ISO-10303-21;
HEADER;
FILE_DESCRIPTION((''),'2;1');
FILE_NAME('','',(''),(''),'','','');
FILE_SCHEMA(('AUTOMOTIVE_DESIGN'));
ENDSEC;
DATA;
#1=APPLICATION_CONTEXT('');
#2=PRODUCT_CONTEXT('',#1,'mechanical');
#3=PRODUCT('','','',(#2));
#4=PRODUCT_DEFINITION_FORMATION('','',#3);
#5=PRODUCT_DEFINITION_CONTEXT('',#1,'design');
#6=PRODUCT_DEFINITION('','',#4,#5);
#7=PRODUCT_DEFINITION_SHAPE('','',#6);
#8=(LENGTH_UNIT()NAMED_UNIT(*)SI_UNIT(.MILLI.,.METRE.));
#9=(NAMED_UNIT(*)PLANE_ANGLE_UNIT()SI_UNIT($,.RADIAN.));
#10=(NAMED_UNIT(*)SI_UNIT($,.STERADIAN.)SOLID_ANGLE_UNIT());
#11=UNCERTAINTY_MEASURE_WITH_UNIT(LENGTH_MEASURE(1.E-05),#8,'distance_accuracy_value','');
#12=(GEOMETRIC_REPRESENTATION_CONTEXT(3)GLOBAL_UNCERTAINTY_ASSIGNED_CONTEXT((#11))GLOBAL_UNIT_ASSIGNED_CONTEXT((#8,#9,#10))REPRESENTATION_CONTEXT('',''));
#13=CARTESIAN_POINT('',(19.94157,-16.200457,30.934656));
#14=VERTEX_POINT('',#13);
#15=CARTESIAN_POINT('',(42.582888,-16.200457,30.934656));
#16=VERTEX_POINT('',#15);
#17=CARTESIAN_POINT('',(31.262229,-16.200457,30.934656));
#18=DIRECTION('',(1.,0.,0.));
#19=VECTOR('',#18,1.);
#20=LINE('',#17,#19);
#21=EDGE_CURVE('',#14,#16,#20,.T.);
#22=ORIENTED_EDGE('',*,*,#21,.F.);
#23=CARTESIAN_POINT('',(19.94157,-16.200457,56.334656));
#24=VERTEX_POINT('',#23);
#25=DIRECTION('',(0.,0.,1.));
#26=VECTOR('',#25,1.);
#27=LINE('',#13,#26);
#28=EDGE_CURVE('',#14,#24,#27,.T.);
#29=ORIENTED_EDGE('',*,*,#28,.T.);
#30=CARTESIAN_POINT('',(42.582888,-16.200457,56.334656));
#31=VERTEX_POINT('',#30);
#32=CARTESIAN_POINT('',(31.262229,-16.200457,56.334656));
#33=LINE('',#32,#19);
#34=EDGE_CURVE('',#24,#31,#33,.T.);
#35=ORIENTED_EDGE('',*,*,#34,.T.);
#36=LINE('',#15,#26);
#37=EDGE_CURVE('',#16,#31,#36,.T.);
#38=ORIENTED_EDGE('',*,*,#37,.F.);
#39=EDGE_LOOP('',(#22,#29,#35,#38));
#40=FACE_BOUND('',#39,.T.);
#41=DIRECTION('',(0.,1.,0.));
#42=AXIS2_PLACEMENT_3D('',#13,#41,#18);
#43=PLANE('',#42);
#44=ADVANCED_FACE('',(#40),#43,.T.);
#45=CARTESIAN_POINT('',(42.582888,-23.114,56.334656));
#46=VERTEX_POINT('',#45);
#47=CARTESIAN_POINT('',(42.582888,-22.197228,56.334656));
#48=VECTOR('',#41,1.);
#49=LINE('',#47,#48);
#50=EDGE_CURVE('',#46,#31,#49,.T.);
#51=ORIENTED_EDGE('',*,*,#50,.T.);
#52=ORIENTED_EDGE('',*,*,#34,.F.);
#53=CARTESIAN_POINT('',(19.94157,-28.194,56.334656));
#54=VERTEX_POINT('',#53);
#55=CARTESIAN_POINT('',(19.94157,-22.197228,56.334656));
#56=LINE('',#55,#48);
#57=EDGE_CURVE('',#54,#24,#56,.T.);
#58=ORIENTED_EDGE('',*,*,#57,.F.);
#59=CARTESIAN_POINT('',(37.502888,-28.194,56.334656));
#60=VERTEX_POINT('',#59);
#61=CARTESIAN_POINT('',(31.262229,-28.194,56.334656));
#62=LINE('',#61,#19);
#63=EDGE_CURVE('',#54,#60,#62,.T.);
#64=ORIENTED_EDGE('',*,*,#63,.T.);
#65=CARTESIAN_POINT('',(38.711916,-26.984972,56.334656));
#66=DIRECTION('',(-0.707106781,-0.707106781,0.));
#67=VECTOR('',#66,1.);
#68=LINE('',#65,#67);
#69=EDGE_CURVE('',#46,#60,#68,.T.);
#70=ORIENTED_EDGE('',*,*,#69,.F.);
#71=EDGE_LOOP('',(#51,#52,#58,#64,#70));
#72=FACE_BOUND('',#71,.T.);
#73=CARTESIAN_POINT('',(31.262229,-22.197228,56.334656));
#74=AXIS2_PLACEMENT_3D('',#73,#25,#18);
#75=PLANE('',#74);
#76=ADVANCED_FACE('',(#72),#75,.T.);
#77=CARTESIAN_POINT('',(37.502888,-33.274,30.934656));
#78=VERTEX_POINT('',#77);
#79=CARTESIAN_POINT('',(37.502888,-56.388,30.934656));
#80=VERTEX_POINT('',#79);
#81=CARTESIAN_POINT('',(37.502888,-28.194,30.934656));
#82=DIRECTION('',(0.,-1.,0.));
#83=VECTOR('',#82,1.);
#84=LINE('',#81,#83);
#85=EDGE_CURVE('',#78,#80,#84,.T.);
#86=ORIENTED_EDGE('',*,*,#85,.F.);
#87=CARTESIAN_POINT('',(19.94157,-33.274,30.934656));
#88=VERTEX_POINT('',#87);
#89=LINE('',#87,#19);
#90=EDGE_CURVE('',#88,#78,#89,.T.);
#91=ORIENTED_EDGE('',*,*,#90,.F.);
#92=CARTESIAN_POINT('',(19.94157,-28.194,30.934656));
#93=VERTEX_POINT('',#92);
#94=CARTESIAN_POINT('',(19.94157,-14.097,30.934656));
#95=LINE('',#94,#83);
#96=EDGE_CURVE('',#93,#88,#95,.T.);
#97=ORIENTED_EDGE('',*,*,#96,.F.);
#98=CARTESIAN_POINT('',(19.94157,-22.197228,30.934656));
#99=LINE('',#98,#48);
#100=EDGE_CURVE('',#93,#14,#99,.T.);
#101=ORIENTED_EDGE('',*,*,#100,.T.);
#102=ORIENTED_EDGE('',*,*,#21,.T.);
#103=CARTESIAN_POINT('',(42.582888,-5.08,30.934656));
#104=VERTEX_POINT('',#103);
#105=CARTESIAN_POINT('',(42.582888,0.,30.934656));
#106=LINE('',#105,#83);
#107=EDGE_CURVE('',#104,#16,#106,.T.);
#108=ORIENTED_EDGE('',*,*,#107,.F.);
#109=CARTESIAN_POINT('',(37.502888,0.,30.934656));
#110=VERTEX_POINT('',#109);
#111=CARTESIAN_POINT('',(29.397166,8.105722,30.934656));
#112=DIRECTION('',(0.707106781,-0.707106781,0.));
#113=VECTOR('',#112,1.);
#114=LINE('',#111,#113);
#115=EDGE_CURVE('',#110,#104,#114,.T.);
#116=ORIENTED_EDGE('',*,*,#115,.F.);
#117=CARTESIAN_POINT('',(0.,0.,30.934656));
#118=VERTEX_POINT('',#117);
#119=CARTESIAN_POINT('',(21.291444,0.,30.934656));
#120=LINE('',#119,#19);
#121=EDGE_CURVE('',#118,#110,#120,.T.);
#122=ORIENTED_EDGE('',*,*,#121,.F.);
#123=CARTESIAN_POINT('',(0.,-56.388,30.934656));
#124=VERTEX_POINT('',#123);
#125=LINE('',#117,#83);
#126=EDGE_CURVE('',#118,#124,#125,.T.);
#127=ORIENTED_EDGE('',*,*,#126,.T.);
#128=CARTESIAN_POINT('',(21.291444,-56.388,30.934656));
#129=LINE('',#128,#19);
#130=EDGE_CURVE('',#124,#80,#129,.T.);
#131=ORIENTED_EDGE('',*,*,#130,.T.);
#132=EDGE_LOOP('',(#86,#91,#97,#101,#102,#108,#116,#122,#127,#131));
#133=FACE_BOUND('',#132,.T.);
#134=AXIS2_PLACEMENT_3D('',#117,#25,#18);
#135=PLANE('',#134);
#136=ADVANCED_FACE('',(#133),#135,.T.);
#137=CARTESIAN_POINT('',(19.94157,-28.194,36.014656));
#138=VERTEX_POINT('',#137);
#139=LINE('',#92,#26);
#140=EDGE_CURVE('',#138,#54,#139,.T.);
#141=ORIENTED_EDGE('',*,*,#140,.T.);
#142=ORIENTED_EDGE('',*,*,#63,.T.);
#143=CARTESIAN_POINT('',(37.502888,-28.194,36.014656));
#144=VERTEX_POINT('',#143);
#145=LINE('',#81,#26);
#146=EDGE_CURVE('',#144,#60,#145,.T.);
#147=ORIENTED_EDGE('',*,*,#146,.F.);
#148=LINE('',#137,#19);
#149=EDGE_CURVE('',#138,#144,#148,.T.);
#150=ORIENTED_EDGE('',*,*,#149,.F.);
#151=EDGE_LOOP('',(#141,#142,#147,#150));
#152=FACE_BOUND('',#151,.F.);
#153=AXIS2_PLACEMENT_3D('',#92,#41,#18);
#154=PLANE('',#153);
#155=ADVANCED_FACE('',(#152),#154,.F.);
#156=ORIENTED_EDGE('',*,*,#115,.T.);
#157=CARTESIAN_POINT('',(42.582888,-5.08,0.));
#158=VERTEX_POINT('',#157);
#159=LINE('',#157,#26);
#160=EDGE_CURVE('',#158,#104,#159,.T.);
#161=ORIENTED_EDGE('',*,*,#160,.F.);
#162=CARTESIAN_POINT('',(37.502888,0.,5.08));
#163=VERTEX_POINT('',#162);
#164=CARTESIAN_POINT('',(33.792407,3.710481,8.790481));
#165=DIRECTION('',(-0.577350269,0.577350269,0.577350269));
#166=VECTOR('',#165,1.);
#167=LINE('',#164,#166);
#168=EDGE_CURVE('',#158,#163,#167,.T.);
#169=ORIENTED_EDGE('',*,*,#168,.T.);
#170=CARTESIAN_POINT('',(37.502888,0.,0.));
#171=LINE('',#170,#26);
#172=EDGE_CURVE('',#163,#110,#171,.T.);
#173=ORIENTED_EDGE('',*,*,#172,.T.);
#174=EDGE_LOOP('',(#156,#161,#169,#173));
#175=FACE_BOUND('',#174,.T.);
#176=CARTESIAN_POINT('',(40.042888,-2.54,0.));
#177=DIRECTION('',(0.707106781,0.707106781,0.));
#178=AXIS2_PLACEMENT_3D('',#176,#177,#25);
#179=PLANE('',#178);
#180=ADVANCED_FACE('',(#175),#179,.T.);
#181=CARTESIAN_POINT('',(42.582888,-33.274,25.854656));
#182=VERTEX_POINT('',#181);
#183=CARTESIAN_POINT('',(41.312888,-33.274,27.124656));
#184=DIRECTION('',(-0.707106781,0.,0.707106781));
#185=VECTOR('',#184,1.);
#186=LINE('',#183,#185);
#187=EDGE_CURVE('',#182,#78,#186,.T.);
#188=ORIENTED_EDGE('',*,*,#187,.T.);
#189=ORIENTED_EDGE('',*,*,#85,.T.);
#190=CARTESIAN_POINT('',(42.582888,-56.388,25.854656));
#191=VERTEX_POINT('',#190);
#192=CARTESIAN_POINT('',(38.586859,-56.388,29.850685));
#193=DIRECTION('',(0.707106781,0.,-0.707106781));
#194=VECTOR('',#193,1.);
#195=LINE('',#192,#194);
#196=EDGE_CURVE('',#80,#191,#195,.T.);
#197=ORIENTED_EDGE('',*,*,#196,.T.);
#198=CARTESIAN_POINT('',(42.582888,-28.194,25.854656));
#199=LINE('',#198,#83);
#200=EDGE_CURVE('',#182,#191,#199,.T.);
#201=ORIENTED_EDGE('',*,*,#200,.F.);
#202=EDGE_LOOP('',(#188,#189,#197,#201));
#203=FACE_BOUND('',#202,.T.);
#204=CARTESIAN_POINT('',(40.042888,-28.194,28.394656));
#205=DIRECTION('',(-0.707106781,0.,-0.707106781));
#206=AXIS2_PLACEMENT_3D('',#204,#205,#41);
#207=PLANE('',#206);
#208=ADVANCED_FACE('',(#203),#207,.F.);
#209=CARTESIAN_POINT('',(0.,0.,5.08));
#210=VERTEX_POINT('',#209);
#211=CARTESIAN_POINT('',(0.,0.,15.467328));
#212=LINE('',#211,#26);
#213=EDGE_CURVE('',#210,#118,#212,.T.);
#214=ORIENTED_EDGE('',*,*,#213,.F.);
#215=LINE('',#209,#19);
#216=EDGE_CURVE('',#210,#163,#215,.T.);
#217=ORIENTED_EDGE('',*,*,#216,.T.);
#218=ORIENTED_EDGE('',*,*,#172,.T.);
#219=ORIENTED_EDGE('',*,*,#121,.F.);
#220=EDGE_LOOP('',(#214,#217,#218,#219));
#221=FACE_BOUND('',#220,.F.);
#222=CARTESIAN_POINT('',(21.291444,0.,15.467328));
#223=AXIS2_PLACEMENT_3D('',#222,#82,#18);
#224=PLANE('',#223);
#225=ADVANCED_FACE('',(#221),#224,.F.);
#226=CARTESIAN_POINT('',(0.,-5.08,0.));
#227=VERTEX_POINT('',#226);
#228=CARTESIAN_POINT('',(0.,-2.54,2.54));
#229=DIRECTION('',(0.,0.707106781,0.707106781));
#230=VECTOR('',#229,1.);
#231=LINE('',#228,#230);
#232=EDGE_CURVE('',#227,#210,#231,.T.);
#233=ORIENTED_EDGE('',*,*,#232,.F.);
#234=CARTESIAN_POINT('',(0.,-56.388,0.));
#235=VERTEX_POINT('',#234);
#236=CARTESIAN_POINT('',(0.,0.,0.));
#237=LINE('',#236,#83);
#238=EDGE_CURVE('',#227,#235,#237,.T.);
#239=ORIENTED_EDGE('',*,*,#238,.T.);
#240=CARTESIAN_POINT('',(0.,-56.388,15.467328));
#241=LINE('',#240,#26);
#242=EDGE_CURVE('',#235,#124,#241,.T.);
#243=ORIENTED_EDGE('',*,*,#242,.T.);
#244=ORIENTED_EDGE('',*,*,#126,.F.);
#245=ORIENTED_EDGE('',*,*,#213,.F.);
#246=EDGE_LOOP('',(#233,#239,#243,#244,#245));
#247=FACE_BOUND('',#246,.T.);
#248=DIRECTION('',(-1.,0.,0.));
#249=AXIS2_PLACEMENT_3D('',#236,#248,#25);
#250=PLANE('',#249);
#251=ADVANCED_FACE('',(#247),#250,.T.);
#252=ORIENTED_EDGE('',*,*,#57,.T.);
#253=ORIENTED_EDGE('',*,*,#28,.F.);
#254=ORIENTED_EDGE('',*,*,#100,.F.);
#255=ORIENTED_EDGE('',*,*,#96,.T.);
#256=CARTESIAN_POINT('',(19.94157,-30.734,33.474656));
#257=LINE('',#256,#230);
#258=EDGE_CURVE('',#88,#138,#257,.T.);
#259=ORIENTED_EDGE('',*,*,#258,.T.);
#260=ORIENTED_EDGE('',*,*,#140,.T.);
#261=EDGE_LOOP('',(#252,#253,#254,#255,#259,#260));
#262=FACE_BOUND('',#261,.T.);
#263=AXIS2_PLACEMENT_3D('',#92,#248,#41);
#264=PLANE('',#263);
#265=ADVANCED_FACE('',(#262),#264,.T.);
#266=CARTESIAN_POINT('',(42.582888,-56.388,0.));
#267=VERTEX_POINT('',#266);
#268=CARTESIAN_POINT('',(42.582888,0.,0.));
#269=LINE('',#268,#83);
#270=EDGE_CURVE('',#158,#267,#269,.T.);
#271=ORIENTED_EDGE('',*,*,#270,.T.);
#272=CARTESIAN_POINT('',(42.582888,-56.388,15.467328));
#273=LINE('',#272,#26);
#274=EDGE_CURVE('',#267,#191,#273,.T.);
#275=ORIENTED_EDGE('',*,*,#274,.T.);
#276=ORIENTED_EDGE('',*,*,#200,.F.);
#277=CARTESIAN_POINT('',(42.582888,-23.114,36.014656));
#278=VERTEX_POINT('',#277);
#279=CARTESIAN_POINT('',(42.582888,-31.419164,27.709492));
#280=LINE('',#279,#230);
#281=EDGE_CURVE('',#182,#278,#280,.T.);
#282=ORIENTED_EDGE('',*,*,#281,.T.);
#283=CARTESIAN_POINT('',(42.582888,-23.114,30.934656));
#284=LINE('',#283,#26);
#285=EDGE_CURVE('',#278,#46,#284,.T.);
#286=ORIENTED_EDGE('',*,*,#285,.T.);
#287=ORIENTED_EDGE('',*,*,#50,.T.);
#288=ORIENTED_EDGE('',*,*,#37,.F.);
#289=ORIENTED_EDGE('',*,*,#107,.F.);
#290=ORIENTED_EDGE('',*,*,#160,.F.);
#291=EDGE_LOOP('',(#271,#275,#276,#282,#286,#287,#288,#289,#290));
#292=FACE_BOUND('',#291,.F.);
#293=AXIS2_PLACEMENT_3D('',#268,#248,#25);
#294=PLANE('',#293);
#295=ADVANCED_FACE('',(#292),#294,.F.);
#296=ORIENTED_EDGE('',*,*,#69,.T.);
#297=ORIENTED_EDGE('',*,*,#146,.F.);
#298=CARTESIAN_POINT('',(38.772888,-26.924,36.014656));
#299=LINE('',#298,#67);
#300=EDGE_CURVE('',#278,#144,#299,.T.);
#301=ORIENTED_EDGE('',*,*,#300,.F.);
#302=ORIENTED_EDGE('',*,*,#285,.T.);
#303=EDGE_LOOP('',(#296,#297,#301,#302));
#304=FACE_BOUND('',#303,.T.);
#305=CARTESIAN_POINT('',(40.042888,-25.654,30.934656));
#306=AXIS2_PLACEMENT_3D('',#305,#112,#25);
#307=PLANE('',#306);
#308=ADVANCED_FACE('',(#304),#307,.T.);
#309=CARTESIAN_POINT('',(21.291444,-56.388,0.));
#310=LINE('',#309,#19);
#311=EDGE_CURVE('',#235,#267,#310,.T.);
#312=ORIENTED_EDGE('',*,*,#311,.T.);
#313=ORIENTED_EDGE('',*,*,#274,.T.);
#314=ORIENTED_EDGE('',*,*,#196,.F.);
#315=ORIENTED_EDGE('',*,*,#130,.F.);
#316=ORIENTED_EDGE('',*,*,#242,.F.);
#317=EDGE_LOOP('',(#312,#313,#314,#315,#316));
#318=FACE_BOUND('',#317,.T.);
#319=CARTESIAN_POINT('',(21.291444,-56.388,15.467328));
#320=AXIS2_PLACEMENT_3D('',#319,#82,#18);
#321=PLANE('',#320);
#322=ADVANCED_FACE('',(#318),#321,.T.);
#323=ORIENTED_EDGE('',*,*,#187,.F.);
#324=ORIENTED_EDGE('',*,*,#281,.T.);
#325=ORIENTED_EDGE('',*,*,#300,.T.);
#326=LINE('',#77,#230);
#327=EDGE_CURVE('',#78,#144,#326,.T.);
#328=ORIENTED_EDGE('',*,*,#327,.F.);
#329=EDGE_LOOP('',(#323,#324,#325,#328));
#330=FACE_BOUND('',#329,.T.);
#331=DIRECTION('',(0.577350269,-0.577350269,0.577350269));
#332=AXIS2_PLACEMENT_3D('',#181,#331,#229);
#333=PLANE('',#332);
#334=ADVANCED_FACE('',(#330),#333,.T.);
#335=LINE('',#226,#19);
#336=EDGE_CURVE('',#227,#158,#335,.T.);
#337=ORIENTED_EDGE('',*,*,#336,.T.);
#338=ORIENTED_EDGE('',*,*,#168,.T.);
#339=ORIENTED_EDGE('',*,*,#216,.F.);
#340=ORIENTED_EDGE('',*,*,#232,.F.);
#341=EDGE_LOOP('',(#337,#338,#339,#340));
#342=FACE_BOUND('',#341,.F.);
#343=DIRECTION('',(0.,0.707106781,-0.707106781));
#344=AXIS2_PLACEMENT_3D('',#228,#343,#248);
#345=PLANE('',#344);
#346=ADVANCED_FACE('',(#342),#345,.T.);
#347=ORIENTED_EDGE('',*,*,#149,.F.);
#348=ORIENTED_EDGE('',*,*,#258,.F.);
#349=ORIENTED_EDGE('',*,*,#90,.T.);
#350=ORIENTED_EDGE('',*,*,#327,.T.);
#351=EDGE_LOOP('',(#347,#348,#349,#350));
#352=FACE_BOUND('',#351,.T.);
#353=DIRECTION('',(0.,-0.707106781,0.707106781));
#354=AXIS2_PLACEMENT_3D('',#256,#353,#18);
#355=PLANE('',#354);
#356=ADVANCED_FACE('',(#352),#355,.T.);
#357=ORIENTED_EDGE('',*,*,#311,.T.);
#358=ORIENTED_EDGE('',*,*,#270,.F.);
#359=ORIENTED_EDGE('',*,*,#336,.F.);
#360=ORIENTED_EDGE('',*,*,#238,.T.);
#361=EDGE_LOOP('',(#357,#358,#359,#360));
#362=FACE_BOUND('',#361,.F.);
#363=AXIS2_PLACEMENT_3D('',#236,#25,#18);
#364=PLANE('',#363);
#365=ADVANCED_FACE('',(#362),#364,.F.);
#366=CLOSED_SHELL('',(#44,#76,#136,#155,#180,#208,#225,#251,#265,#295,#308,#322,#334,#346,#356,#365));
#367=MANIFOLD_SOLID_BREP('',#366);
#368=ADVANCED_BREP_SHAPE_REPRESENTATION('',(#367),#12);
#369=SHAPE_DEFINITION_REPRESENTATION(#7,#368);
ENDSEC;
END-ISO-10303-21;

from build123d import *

# Parameters (mm, degrees)
F0_W     = 42.5828881562
F0_H     = 30.9346560389
F1_DEPTH = 56.388
F2_W     = 22.6413179189
F2_H     = 11.9935432317
F3_DEPTH = 25.4
F4_SIZE  = 5.08


with BuildPart() as f1:
    # F0 (on Front) → F1 (new body)
    with BuildSketch(Plane.XZ):
        with Locations((21.2914440781, 15.4673280194)):
            Rectangle(F0_W, F0_H)
    extrude(amount=F1_DEPTH)

    # F2 (on face) → F3 (join)
    with BuildSketch(Plane.XY.offset(30.9346560389)):
        with Locations((31.2622291967, -22.1972283841)):
            Rectangle(F2_W, F2_H)
    extrude(amount=F3_DEPTH)

    # F4
    f4_edges = [f1.edges().sort_by_distance(p)[0] for p in [
        (31.262229, -28.194, 30.934656),
        (42.582888, -42.291, 30.934656),
        (21.291444, 0, 0),
        (42.582888, 0, 15.467328),
        (42.582888, -28.194, 43.634656),
    ]]
    chamfer(f4_edges, length=F4_SIZE)


solid = f1.part
